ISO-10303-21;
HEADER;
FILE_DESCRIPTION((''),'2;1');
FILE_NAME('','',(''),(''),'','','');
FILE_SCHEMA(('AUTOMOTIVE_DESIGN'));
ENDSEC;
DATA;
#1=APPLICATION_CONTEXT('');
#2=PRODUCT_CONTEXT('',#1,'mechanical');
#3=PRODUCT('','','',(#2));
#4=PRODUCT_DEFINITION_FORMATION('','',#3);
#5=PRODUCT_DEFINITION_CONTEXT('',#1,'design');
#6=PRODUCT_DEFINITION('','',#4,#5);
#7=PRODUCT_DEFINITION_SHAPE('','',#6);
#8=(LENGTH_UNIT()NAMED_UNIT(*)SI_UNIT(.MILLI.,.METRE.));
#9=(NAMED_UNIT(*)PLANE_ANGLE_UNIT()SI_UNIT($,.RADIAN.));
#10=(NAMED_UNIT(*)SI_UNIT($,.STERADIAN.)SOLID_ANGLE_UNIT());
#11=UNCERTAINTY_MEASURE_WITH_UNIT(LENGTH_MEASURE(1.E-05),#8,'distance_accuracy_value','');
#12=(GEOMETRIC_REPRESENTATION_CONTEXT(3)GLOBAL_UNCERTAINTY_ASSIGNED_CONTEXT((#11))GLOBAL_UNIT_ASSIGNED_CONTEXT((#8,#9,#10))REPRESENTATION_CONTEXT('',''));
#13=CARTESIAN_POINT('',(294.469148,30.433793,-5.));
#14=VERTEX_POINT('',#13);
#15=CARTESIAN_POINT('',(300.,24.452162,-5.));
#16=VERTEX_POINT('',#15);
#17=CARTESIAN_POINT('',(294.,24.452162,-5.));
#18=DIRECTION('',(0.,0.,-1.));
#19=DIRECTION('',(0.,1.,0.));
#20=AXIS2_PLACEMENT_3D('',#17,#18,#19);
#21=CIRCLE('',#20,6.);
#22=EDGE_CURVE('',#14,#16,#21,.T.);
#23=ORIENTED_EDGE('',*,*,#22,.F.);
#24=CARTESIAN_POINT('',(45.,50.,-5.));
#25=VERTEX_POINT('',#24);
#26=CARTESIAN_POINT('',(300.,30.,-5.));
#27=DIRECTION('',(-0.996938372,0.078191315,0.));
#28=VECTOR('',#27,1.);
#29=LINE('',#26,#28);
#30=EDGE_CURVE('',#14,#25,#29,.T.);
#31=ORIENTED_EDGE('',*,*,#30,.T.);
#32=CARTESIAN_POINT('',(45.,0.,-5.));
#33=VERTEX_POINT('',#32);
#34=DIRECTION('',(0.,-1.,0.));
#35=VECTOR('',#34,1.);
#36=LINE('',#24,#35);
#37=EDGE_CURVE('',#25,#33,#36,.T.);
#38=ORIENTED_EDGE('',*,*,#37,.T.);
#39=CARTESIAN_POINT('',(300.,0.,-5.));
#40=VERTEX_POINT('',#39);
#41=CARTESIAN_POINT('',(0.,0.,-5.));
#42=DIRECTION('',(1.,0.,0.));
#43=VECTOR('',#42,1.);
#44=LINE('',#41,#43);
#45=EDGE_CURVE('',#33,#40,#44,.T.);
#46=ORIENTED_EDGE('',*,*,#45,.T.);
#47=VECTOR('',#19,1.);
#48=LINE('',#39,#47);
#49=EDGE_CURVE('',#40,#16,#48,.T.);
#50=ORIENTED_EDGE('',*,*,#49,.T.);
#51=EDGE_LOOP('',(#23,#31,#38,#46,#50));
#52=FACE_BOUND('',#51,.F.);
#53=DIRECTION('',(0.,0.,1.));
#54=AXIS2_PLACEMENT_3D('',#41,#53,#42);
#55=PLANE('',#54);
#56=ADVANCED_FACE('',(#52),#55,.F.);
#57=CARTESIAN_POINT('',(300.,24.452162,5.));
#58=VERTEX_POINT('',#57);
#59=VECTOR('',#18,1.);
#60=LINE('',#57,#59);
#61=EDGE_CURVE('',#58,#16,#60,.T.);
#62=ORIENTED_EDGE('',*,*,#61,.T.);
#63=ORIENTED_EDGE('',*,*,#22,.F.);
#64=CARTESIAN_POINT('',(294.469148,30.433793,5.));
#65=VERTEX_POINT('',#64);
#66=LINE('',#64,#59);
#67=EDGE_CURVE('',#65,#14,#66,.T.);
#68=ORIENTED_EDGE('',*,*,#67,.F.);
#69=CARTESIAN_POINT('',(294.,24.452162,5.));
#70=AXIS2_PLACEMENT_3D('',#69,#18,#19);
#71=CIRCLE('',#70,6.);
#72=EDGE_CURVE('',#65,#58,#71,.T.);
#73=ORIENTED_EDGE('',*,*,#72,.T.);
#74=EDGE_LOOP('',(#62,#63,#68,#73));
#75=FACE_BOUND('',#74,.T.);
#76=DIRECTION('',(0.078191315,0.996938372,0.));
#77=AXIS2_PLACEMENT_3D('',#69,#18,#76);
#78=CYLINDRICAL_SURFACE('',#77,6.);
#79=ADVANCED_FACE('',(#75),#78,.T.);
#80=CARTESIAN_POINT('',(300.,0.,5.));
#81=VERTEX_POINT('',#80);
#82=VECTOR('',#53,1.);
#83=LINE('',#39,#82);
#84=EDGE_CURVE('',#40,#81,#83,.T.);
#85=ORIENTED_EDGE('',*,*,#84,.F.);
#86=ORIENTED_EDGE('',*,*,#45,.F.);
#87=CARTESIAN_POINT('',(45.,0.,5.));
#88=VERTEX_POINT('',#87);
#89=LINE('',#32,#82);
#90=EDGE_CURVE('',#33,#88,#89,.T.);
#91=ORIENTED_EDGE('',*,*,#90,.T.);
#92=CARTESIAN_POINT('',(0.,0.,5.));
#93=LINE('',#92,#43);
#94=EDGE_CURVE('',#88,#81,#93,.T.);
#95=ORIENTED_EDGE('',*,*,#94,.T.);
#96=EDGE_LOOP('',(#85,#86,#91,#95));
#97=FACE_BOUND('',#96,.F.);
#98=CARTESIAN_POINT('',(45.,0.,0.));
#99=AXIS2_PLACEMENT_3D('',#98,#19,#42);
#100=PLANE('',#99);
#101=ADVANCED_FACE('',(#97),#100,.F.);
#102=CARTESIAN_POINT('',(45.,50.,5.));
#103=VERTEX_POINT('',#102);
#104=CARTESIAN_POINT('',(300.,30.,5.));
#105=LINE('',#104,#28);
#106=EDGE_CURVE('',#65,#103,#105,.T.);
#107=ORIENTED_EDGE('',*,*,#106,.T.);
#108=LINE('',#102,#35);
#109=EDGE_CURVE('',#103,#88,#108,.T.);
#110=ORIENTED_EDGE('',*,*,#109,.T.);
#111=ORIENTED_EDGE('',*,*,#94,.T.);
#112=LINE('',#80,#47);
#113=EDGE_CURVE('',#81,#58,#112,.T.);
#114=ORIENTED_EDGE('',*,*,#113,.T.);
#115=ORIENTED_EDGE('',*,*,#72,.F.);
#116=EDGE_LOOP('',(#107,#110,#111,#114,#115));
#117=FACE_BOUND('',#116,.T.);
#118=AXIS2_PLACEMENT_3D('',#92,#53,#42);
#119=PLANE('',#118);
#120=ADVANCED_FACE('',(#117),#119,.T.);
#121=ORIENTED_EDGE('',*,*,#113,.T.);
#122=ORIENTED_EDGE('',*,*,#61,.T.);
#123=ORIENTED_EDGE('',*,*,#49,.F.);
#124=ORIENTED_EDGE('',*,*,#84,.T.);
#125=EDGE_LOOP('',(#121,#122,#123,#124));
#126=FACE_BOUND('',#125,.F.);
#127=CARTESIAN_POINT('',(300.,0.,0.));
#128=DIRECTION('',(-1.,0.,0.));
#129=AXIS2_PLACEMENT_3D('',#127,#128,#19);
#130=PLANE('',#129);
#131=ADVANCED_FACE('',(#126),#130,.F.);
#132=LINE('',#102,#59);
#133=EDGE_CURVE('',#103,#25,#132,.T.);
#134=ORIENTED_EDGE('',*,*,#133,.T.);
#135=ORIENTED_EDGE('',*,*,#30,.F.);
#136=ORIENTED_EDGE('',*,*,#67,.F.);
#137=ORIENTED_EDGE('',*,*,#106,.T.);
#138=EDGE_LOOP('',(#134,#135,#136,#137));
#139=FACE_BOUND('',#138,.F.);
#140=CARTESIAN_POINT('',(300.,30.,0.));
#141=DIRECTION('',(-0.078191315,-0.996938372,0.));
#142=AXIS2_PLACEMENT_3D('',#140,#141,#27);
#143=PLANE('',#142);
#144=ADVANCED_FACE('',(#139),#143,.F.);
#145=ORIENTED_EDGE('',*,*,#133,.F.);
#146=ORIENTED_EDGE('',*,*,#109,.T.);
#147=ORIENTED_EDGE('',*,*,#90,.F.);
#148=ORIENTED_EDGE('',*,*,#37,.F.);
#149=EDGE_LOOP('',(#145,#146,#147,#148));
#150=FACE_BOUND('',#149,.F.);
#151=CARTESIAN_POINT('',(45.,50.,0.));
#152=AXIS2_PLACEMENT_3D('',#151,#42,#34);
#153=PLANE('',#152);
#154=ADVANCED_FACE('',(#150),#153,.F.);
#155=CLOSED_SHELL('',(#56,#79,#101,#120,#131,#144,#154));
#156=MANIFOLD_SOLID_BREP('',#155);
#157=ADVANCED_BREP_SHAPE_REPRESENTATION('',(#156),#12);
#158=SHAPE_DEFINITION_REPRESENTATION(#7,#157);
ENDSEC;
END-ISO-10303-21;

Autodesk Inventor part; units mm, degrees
ref_plane "YZ Plane" through (0, 0, 0) normal (1, 0, 0) x (0, 1, 0)
ref_plane "XZ Plane" through (0, 0, 0) normal (0, 1, 0) x (-1, 0, 0)
ref_plane "XY Plane" through (0, 0, 0) normal (0, 0, 1) x (1, 0, 0)
sketch "Sketch3" plane through (0, 0, 0) normal (0, 0, 1) x (1, 0, 0)
  line L0 (0, 0) -> (300, 0)
  line L1 (300, 0) -> (300, 30)
  line L2 (300, 30) -> (-5.542, 53.9641)
  line L3 (45, 50) -> (45, 0)
  dimension "d11" = 300
  dimension "d12" = 30
  dimension "d13" = 45
  dimension "d14" = 50
extrude "Plate1" add sketch "Sketch3" along normal mid plane 10
fillet "Corner Round1" radius 6 1 edges at (300, 30, 0)
equation "\"d15\" = Thickness"
equation "\"BendReliefDepth\" = 0.5 * Thickness"
equation "\"Thickness\" = 10"
properties part number "PRS 1614 charging hatch reinf 500mm_1200" material "Steel"
